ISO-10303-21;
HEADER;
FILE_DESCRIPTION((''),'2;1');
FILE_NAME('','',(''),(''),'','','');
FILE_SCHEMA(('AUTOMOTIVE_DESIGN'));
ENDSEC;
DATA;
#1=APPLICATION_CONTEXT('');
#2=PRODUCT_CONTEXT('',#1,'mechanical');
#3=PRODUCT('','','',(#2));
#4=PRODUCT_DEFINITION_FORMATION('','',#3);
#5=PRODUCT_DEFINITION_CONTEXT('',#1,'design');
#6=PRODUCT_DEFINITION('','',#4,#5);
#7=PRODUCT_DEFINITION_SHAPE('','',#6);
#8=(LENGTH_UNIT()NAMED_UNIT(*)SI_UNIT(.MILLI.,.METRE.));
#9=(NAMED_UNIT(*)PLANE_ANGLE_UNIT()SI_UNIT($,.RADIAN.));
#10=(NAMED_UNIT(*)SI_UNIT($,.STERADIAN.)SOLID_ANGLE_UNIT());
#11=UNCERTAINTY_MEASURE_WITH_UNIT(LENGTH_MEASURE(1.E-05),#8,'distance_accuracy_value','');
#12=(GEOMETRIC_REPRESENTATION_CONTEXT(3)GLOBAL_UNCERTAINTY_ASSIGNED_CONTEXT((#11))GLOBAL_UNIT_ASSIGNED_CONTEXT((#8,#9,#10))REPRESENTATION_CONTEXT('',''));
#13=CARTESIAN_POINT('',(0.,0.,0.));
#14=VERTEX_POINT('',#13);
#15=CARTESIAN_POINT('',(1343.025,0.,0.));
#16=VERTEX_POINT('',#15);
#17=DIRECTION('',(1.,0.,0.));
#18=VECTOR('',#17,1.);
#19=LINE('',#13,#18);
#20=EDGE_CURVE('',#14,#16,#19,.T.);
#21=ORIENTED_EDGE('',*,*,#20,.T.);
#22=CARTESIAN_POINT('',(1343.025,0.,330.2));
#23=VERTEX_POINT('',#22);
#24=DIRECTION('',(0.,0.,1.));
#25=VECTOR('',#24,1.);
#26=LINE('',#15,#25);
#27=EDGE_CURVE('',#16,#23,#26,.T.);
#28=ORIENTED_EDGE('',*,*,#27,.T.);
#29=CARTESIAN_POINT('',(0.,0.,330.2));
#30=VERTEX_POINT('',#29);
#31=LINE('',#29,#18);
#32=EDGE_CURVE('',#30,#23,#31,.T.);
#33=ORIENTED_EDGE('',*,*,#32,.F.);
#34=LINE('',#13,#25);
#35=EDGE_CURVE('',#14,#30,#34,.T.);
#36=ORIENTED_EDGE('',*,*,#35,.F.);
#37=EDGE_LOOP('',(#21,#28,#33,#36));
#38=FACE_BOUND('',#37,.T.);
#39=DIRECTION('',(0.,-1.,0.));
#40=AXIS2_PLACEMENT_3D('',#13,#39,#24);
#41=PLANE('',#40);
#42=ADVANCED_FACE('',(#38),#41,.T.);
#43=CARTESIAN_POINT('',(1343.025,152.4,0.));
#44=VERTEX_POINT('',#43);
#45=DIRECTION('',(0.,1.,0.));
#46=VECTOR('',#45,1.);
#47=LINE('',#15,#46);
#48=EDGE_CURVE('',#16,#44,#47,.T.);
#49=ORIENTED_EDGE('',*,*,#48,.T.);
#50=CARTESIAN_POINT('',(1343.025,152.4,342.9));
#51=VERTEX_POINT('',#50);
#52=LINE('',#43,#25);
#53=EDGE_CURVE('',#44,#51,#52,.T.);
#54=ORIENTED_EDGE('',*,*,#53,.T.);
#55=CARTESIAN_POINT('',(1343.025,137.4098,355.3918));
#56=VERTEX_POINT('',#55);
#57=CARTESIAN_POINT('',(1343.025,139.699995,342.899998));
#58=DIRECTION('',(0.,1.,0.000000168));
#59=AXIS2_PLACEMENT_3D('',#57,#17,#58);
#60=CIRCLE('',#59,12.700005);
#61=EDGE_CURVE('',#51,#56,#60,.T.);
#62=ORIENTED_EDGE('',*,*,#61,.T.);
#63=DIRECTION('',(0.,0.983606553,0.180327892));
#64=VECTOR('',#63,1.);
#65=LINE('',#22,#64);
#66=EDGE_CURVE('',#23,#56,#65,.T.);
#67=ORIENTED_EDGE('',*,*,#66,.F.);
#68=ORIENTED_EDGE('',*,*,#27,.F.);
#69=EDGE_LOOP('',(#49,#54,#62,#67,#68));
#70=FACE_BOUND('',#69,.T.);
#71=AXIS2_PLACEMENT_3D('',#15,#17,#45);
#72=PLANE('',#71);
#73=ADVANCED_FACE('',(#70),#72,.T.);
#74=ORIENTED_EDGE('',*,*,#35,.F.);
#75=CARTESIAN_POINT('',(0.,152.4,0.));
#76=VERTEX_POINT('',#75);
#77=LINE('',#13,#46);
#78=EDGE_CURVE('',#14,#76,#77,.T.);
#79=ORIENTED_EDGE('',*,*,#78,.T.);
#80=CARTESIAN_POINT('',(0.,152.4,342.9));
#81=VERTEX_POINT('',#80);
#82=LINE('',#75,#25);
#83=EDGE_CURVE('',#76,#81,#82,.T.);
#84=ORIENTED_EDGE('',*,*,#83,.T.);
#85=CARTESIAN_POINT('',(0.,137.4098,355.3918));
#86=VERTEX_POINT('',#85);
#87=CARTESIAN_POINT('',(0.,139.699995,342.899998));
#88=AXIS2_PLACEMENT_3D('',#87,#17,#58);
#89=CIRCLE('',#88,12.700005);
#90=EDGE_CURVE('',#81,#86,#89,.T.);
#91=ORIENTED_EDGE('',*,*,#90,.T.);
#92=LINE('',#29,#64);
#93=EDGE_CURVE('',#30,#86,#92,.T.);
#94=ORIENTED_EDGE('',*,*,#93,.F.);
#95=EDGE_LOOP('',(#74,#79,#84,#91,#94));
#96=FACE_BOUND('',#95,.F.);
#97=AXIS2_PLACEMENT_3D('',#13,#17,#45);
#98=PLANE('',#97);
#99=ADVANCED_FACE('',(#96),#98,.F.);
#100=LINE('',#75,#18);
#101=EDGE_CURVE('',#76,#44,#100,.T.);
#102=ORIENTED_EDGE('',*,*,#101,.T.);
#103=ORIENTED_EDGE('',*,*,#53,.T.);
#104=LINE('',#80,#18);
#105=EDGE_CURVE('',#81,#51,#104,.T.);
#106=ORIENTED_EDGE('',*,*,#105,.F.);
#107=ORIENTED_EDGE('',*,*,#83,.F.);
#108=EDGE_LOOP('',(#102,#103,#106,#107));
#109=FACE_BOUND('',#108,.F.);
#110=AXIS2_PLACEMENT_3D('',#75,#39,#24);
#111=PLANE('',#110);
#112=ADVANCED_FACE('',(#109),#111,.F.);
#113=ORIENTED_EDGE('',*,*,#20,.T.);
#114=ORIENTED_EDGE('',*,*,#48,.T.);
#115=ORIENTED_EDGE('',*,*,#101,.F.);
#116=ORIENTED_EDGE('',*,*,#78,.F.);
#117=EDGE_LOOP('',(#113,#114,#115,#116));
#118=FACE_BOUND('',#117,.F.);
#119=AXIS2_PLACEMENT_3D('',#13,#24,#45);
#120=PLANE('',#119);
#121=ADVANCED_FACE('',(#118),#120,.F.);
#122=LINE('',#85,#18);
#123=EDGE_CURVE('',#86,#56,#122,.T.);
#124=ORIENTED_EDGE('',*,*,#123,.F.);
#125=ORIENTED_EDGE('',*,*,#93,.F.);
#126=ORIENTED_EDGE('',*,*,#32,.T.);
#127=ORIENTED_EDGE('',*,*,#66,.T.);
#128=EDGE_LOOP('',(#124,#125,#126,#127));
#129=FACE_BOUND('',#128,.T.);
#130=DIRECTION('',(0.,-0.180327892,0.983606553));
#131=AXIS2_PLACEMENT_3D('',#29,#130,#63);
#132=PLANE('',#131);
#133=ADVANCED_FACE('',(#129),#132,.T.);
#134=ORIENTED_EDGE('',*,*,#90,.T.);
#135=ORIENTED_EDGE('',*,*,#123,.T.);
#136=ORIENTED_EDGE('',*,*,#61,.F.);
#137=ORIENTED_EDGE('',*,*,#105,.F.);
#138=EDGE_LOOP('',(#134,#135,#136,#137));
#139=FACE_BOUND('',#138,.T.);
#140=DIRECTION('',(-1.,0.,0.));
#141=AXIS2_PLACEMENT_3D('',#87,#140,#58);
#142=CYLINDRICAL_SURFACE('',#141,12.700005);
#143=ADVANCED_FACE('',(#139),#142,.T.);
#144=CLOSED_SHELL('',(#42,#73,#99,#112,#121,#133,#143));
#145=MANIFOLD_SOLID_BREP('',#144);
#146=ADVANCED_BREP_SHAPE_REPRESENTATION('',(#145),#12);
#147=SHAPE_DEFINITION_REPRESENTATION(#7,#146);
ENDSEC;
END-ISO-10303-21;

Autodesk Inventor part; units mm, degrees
ref_plane "YZ Plane" through (0, 0, 0) normal (1, 0, 0) x (0, 1, 0)
ref_plane "XZ Plane" through (0, 0, 0) normal (0, 1, 0) x (-1, 0, 0)
ref_plane "XY Plane" through (0, 0, 0) normal (0, 0, 1) x (1, 0, 0)
sketch "Profile" plane through (0, 0, 0) normal (0, 0, 1) x (1, 0, 0)
  line L0 (0, 0) -> (0, 330.2)
  line L1 (0, 0) -> (152.4, 0)
  line L2 (152.4, 0) -> (152.4, 342.9)
  line L3 (152.4, 342.9) -> (139.7, 342.9) construction
  line L4 (152.4, 342.9) -> (139.7, 342.9) construction
  arc A0 (152.4, 342.9) -> (137.4098, 355.3918) centre (139.7, 342.9) ccw
  line L5 (0, 330.2) -> (137.4098, 355.3918)
  dimension "d0" = 330.2
  dimension "d1" = 152.4
  dimension "d2" = 342.9
  dimension "d4" = 12.7
  dimension "d5" = 12.7
sketch "Sketch1" plane through (0, 0, 0) normal (1, 0, 0) x (0, 1, 0)
  line L0 (0, 0) -> (0, 330.2)
  line L1 (0, 0) -> (152.4, 0)
  line L2 (152.4, 0) -> (152.4, 342.9)
  line L3 (152.4, 342.9) -> (139.7, 342.9) construction
  line L4 (152.4, 342.9) -> (139.7, 342.9) construction
  arc A0 (152.4, 342.9) -> (137.4098, 355.3918) centre (139.7, 342.9) ccw
  line L5 (0, 330.2) -> (137.4098, 355.3918)
extrude "Extrusion1" add sketch "Sketch1" along normal blind 1343.025
properties part number "A" material "Granite, Cut, Polished"
